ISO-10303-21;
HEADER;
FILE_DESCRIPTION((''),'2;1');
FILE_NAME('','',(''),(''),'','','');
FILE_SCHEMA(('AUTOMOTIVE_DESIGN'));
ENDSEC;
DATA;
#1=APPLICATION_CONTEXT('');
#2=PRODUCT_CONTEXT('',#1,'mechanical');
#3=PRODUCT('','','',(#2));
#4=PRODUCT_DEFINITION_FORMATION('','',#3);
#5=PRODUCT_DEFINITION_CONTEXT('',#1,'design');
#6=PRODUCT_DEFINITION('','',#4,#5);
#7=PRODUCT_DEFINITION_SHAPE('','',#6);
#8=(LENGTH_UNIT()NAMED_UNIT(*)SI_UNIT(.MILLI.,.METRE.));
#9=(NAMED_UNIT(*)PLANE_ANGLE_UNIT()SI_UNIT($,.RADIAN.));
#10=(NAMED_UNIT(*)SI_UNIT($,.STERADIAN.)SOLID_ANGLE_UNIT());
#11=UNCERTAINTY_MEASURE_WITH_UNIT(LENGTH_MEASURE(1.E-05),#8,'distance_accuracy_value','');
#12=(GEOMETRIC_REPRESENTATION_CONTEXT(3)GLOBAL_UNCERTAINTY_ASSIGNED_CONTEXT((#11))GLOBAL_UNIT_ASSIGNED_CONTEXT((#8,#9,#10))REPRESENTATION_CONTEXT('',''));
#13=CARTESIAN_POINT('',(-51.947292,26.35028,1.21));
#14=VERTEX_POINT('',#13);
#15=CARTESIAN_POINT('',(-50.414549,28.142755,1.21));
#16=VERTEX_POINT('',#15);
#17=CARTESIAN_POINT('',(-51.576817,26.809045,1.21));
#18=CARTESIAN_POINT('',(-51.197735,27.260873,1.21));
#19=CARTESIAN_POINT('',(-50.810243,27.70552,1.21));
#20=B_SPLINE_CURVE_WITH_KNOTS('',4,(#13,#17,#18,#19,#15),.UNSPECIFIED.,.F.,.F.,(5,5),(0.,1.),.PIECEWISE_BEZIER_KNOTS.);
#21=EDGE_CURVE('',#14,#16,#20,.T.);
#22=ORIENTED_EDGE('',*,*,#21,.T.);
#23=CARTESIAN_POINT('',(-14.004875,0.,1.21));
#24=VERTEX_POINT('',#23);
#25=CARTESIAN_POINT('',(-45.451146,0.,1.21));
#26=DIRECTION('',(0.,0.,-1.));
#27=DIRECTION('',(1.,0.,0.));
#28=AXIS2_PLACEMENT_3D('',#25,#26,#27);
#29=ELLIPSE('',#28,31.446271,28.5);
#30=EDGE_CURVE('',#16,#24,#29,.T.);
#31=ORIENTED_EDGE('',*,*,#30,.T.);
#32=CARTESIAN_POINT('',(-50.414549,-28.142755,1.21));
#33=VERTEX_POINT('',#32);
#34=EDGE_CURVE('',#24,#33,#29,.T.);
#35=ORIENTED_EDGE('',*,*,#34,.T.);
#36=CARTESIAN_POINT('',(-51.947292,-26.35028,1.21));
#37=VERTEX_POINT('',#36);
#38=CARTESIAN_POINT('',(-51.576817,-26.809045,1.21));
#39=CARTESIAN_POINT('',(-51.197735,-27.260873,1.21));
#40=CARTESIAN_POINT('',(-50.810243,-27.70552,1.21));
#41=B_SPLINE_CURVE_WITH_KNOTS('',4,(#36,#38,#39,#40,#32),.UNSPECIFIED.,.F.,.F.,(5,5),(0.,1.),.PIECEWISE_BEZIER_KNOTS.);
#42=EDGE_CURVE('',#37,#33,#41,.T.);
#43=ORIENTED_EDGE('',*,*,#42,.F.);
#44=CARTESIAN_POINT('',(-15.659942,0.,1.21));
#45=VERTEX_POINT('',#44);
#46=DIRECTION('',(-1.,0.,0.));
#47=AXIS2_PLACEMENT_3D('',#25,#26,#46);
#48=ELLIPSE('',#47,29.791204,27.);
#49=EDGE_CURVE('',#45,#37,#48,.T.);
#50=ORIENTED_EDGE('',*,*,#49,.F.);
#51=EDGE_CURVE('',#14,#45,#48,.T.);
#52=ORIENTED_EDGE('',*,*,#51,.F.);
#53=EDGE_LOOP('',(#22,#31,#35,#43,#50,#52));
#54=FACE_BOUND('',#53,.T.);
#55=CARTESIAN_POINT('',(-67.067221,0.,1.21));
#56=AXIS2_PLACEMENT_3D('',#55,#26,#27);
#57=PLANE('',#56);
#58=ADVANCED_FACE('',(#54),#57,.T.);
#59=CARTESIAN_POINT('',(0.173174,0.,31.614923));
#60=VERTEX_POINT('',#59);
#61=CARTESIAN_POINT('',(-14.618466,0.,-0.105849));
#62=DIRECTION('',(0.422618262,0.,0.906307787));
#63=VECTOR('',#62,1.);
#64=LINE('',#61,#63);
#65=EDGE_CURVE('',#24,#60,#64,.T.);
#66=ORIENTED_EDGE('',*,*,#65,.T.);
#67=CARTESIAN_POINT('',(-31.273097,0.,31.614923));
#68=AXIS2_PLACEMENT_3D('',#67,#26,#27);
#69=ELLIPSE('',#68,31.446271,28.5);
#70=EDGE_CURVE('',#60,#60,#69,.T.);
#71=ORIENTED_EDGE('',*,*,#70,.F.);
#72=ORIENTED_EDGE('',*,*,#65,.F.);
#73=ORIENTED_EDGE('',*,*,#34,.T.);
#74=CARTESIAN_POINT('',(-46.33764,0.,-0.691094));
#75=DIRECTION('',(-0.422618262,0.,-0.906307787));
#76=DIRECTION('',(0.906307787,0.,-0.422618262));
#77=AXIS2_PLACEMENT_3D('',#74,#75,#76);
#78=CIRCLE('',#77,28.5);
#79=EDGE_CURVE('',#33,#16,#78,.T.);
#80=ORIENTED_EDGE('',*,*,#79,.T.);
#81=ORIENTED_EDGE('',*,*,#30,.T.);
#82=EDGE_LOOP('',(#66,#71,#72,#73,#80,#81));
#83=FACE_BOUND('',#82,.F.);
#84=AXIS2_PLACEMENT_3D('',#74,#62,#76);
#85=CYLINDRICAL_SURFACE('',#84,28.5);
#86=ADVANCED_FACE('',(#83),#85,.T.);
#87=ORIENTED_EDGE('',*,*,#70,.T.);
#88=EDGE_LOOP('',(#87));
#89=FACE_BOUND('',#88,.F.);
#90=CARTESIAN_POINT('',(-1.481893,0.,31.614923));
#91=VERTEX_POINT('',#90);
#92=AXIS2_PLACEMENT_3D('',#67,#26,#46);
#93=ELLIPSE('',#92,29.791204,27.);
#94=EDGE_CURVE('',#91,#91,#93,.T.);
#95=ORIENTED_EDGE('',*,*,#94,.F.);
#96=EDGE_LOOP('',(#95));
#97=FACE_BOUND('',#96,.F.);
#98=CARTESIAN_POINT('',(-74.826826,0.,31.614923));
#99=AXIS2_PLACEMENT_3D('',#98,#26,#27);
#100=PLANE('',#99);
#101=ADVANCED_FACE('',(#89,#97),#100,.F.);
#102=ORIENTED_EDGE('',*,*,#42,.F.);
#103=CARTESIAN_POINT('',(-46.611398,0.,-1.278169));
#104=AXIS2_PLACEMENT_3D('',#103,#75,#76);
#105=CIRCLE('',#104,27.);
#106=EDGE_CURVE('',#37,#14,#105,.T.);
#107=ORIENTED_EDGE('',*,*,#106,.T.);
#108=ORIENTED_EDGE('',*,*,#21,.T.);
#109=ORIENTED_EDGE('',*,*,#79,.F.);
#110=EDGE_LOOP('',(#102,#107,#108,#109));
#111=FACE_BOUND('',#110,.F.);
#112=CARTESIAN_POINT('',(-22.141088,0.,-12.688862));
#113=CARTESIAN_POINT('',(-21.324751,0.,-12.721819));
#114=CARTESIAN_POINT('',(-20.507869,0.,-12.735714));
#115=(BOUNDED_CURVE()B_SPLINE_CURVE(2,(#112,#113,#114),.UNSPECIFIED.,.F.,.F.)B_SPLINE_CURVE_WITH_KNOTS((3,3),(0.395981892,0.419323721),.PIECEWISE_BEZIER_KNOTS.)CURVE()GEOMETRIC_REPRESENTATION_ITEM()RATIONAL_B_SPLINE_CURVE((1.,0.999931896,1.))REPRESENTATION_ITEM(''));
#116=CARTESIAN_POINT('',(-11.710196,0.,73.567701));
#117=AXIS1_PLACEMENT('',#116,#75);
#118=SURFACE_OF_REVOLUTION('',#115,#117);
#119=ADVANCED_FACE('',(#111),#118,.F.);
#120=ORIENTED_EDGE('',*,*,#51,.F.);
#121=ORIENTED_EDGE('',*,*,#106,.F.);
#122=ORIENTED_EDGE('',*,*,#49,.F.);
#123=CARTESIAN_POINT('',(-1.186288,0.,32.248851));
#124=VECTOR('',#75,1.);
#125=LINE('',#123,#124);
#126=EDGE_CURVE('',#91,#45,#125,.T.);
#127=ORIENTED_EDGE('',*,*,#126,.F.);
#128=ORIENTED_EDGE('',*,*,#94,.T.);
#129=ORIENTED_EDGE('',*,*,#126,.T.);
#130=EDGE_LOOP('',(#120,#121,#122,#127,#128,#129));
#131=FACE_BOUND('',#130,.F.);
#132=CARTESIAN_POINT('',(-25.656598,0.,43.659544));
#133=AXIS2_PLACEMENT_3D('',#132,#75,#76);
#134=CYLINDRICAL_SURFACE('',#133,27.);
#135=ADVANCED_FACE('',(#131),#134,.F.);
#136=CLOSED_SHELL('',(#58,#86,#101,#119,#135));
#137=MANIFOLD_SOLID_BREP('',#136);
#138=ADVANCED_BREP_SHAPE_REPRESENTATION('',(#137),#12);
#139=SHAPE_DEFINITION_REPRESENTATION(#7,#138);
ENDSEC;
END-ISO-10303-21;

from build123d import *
from build123d import SkipClean  # not in build123d's __all__

# Parameters (mm, degrees)
F2_W     = 200
F2_H     = 100
F2_H_2   = 20
F3_DEPTH = 100
F2_W_2   = 75
F2_H_3   = 25
F6_DEPTH = 35
F8_W     = 96.0638802499
F8_H     = 5.2582259355
F9_DEPTH = 50


# Not quite as in the source:
# - ends of sketch curves that miss each other by under 0.0002 mm in the source are joined
# - a feature of the source that left no trace in its solid (it failed there, or was rolled back) is left out
# - a feature names something its author has since deleted; it is built from what else it names


with BuildPart() as f1:
    # F0 (on Front) → F1 (revolve)
    with BuildSketch(Plane.XZ):
        with BuildLine():
            add(Edge.make_bspline(
                [(45.9368361786, 26.8256458213), (91.5796084466, 124.7068868213), (26.32544778, 155.1354016666)],
                knots=[4.7123889804, 4.7123889804, 4.7123889804, 6.2831853072, 6.2831853072, 6.2831853072], degree=2, weights=[1, 0.7071067812, 1]))
            Line((26.32544778, 155.1354016666), (25.4802112565, 153.3227860925))
            add(Edge.make_bspline(
                [(44.1242206045, 27.6708823448), (88.921756349, 123.7395077707), (25.4802112565, 153.3227860925)],
                knots=[4.7123889804, 4.7123889804, 4.7123889804, 6.2831853072, 6.2831853072, 6.2831853072], degree=2, weights=[1, 0.7071067812, 1]))
            Line((44.1242206045, 27.6708823448), (45.9368361786, 26.8256458213))
        make_face()
    revolve(axis=Axis((-11.7101957767, 0, 73.5677008333), (-0.4226182617, 0, -0.906307787)))


with BuildPart() as f1b:
    # F0 (on Front) → F1, piece 2 (revolve)
    with BuildSketch(Plane.XZ):
        Polygon((0.1731735164, 31.6149234015), (-1.1862881642, 32.2488507941), (-15.9779273251, 0.5280782478), (-14.6184656445, -0.1058491448), align=None)
        with BuildLine():
            add(Edge.make_bspline(
                [(-22.1410875874, -12.6888615869), (-21.3247514691, -12.7218189818), (-20.5078685114, -12.7357143506)],
                knots=[0.3959818916, 0.3959818916, 0.3959818916, 0.4193237212, 0.4193237212, 0.4193237212], degree=2, weights=[1, 0.9999318956, 1]))
            Line((-20.5078685114, -12.7357143506), (-14.6184656445, -0.1058491448))
            Line((-14.6184656445, -0.1058491448), (-15.9779273251, 0.5280782478))
            Line((-15.9779273251, 0.5280782478), (-22.1410875874, -12.6888615869))
        make_face()
    revolve(axis=Axis((-11.7101957767, 0, 73.5677008333), (-0.4226182617, 0, -0.906307787)))


with BuildPart() as f3_tool:
    # F2 (on Front) → F3 (new body, symmetric)
    with BuildSketch(Plane.XZ):
        with Locations((-9.317324488, 115)):
            Rectangle(F2_W, F2_H)
        with Locations((0, -10)):
            Rectangle(F2_W, F2_H_2)
    extrude(amount=F3_DEPTH, both=True)


with BuildPart() as f1_1:
    add(f1.part, clean=False)

    # F3: cut by f3_tool
    add(f3_tool.part, mode=Mode.SUBTRACT)

    # F0 (on Front) → F7 (revolve, cut)
    with BuildSketch(Plane.XZ):
        with BuildLine():
            add(Edge.make_bspline(
                [(-84.5714851547, 87.682675512), (-114.9949652888, 22.4393118183), (-49.756636783, -7.9949639789)],
                knots=[4.7123889804, 4.7123889804, 4.7123889804, 6.2830198332, 6.2830198332, 6.2830198332], degree=2, weights=[1, 0.7071652827, 1]))
            Line((-49.756636783, -7.9949639789), (-49.7458393334, -8))
            Line((-49.7458393334, -8), (-49.735042102, -8.0050348317))
            add(Edge.make_bspline(
                [(-49.735042102, -8.0050348317), (15.5133557484, -38.4177185072), (45.9368361786, 26.8256458213)],
                knots=[0.0001654643, 0.0001654643, 0.0001654643, 1.5707963268, 1.5707963268, 1.5707963268], degree=2, weights=[1, 0.7071652792, 1]))
            Line((45.9368361786, 26.8256458213), (44.1242206045, 27.6708823448))
            add(Edge.make_bspline(
                [(-20.5078685114, -12.7357143506), (24.9219656119, -13.5084863764), (44.1242206045, 27.6708823448)],
                knots=[0.4193237212, 0.4193237212, 0.4193237212, 1.5707963268, 1.5707963268, 1.5707963268], degree=2, weights=[1, 0.8387916479, 1]))
            add(Edge.make_bspline(
                [(-22.1410875874, -12.6888615869), (-21.3247514691, -12.7218189818), (-20.5078685114, -12.7357143506)],
                knots=[0.3959818916, 0.3959818916, 0.3959818916, 0.4193237212, 0.4193237212, 0.4193237212], degree=2, weights=[1, 0.9999318956, 1]))
            add(Edge.make_bspline(
                [(-38.8967253804, -9.951843981), (-30.686098613, -12.3438795424), (-22.1410875874, -12.6888615869)],
                knots=[0.1528447244, 0.1528447244, 0.1528447244, 0.3959818916, 0.3959818916, 0.3959818916], degree=2, weights=[1, 0.9926196359, 1]))
            add(Edge.make_bspline(
                [(-48.9006028099, -6.1873844259), (-44.042789232, -8.4526200992), (-38.8967253804, -9.951843981)],
                knots=[0, 0, 0, 0.1528447244, 0.1528447244, 0.1528447244], degree=2, weights=[1, 0.9970812323, 1]))
            add(Edge.make_bspline(
                [(-48.9112500264, -6.1824184595), (-48.9059266265, -6.1849018895), (-48.9006028099, -6.1873844259)],
                knots=[6.2830174734, 6.2830174734, 6.2830174734, 6.2831853072, 6.2831853072, 6.2831853072], degree=2, weights=[1, 0.9999999965, 1]))
            add(Edge.make_bspline(
                [(-71.0817080874, 10.1325245471), (-61.6323129878, -0.2478899078), (-48.9112500264, -6.1824184595)],
                knots=[5.8872034156, 5.8872034156, 5.8872034156, 6.2830174734, 6.2830174734, 6.2830174734], degree=2, weights=[1, 0.9804802401, 1]))
            add(Edge.make_bspline(
                [(-72.1674123725, 11.3535265686), (-71.6316856587, 10.7366896891), (-71.0817080874, 10.1325245471)],
                knots=[5.863861586, 5.863861586, 5.863861586, 5.8872034156, 5.8872034156, 5.8872034156], degree=2, weights=[1, 0.9999318956, 1]))
            add(Edge.make_bspline(
                [(-82.7588695806, 86.8374389885), (-101.9611245733, 45.6580702673), (-72.1674123725, 11.3535265686)],
                knots=[4.7123889804, 4.7123889804, 4.7123889804, 5.863861586, 5.863861586, 5.863861586], degree=2, weights=[1, 0.8387916479, 1]))
            Line((-82.7588695806, 86.8374389885), (-84.5714851547, 87.682675512))
        make_face()
        with BuildLine():
            add(Edge.make_bspline(
                [(26.32544778, 155.1354016666), (-38.9287128867, 185.5639165119), (-84.5714851547, 87.682675512)],
                knots=[0, 0, 0, 1.5707963268, 1.5707963268, 1.5707963268], degree=2, weights=[1, 0.7071067812, 1]))
            Line((-84.5714851547, 87.682675512), (-82.7588695806, 86.8374389885))
            add(Edge.make_bspline(
                [(25.4802112565, 153.3227860925), (-37.9613338361, 182.9060644144), (-82.7588695806, 86.8374389885)],
                knots=[0, 0, 0, 1.5707963268, 1.5707963268, 1.5707963268], degree=2, weights=[1, 0.7071067812, 1]))
            Line((25.4802112565, 153.3227860925), (26.32544778, 155.1354016666))
        make_face()
    with SkipClean():  # cleaning this boolean's faces spoils the solid; the shape is the same uncleaned
        revolve(axis=Axis((-11.7101957767, 0, 73.5677008333), (-0.4226182617, 0, -0.906307787)), mode=Mode.SUBTRACT)


with BuildPart() as f1b_1:
    add(f1b.part, clean=False)

    # F3: cut by f3_tool
    add(f3_tool.part, mode=Mode.SUBTRACT)

    # F2 (on Front) → F6 (cut, symmetric)
    with BuildSketch(Plane.XZ):
        with Locations((-37.3268264836, 44.1149234015)):
            Rectangle(F2_W_2, F2_H_3)
    extrude(amount=F6_DEPTH, both=True, mode=Mode.SUBTRACT)

    # F8 (on Front) → F9 (cut, symmetric)
    with BuildSketch(Plane.XZ):
        with Locations((-19.0352806821, -1.4191129678)):
            Rectangle(F8_W, F8_H)
    extrude(amount=F9_DEPTH, both=True, mode=Mode.SUBTRACT)


solid = f1b_1.part
